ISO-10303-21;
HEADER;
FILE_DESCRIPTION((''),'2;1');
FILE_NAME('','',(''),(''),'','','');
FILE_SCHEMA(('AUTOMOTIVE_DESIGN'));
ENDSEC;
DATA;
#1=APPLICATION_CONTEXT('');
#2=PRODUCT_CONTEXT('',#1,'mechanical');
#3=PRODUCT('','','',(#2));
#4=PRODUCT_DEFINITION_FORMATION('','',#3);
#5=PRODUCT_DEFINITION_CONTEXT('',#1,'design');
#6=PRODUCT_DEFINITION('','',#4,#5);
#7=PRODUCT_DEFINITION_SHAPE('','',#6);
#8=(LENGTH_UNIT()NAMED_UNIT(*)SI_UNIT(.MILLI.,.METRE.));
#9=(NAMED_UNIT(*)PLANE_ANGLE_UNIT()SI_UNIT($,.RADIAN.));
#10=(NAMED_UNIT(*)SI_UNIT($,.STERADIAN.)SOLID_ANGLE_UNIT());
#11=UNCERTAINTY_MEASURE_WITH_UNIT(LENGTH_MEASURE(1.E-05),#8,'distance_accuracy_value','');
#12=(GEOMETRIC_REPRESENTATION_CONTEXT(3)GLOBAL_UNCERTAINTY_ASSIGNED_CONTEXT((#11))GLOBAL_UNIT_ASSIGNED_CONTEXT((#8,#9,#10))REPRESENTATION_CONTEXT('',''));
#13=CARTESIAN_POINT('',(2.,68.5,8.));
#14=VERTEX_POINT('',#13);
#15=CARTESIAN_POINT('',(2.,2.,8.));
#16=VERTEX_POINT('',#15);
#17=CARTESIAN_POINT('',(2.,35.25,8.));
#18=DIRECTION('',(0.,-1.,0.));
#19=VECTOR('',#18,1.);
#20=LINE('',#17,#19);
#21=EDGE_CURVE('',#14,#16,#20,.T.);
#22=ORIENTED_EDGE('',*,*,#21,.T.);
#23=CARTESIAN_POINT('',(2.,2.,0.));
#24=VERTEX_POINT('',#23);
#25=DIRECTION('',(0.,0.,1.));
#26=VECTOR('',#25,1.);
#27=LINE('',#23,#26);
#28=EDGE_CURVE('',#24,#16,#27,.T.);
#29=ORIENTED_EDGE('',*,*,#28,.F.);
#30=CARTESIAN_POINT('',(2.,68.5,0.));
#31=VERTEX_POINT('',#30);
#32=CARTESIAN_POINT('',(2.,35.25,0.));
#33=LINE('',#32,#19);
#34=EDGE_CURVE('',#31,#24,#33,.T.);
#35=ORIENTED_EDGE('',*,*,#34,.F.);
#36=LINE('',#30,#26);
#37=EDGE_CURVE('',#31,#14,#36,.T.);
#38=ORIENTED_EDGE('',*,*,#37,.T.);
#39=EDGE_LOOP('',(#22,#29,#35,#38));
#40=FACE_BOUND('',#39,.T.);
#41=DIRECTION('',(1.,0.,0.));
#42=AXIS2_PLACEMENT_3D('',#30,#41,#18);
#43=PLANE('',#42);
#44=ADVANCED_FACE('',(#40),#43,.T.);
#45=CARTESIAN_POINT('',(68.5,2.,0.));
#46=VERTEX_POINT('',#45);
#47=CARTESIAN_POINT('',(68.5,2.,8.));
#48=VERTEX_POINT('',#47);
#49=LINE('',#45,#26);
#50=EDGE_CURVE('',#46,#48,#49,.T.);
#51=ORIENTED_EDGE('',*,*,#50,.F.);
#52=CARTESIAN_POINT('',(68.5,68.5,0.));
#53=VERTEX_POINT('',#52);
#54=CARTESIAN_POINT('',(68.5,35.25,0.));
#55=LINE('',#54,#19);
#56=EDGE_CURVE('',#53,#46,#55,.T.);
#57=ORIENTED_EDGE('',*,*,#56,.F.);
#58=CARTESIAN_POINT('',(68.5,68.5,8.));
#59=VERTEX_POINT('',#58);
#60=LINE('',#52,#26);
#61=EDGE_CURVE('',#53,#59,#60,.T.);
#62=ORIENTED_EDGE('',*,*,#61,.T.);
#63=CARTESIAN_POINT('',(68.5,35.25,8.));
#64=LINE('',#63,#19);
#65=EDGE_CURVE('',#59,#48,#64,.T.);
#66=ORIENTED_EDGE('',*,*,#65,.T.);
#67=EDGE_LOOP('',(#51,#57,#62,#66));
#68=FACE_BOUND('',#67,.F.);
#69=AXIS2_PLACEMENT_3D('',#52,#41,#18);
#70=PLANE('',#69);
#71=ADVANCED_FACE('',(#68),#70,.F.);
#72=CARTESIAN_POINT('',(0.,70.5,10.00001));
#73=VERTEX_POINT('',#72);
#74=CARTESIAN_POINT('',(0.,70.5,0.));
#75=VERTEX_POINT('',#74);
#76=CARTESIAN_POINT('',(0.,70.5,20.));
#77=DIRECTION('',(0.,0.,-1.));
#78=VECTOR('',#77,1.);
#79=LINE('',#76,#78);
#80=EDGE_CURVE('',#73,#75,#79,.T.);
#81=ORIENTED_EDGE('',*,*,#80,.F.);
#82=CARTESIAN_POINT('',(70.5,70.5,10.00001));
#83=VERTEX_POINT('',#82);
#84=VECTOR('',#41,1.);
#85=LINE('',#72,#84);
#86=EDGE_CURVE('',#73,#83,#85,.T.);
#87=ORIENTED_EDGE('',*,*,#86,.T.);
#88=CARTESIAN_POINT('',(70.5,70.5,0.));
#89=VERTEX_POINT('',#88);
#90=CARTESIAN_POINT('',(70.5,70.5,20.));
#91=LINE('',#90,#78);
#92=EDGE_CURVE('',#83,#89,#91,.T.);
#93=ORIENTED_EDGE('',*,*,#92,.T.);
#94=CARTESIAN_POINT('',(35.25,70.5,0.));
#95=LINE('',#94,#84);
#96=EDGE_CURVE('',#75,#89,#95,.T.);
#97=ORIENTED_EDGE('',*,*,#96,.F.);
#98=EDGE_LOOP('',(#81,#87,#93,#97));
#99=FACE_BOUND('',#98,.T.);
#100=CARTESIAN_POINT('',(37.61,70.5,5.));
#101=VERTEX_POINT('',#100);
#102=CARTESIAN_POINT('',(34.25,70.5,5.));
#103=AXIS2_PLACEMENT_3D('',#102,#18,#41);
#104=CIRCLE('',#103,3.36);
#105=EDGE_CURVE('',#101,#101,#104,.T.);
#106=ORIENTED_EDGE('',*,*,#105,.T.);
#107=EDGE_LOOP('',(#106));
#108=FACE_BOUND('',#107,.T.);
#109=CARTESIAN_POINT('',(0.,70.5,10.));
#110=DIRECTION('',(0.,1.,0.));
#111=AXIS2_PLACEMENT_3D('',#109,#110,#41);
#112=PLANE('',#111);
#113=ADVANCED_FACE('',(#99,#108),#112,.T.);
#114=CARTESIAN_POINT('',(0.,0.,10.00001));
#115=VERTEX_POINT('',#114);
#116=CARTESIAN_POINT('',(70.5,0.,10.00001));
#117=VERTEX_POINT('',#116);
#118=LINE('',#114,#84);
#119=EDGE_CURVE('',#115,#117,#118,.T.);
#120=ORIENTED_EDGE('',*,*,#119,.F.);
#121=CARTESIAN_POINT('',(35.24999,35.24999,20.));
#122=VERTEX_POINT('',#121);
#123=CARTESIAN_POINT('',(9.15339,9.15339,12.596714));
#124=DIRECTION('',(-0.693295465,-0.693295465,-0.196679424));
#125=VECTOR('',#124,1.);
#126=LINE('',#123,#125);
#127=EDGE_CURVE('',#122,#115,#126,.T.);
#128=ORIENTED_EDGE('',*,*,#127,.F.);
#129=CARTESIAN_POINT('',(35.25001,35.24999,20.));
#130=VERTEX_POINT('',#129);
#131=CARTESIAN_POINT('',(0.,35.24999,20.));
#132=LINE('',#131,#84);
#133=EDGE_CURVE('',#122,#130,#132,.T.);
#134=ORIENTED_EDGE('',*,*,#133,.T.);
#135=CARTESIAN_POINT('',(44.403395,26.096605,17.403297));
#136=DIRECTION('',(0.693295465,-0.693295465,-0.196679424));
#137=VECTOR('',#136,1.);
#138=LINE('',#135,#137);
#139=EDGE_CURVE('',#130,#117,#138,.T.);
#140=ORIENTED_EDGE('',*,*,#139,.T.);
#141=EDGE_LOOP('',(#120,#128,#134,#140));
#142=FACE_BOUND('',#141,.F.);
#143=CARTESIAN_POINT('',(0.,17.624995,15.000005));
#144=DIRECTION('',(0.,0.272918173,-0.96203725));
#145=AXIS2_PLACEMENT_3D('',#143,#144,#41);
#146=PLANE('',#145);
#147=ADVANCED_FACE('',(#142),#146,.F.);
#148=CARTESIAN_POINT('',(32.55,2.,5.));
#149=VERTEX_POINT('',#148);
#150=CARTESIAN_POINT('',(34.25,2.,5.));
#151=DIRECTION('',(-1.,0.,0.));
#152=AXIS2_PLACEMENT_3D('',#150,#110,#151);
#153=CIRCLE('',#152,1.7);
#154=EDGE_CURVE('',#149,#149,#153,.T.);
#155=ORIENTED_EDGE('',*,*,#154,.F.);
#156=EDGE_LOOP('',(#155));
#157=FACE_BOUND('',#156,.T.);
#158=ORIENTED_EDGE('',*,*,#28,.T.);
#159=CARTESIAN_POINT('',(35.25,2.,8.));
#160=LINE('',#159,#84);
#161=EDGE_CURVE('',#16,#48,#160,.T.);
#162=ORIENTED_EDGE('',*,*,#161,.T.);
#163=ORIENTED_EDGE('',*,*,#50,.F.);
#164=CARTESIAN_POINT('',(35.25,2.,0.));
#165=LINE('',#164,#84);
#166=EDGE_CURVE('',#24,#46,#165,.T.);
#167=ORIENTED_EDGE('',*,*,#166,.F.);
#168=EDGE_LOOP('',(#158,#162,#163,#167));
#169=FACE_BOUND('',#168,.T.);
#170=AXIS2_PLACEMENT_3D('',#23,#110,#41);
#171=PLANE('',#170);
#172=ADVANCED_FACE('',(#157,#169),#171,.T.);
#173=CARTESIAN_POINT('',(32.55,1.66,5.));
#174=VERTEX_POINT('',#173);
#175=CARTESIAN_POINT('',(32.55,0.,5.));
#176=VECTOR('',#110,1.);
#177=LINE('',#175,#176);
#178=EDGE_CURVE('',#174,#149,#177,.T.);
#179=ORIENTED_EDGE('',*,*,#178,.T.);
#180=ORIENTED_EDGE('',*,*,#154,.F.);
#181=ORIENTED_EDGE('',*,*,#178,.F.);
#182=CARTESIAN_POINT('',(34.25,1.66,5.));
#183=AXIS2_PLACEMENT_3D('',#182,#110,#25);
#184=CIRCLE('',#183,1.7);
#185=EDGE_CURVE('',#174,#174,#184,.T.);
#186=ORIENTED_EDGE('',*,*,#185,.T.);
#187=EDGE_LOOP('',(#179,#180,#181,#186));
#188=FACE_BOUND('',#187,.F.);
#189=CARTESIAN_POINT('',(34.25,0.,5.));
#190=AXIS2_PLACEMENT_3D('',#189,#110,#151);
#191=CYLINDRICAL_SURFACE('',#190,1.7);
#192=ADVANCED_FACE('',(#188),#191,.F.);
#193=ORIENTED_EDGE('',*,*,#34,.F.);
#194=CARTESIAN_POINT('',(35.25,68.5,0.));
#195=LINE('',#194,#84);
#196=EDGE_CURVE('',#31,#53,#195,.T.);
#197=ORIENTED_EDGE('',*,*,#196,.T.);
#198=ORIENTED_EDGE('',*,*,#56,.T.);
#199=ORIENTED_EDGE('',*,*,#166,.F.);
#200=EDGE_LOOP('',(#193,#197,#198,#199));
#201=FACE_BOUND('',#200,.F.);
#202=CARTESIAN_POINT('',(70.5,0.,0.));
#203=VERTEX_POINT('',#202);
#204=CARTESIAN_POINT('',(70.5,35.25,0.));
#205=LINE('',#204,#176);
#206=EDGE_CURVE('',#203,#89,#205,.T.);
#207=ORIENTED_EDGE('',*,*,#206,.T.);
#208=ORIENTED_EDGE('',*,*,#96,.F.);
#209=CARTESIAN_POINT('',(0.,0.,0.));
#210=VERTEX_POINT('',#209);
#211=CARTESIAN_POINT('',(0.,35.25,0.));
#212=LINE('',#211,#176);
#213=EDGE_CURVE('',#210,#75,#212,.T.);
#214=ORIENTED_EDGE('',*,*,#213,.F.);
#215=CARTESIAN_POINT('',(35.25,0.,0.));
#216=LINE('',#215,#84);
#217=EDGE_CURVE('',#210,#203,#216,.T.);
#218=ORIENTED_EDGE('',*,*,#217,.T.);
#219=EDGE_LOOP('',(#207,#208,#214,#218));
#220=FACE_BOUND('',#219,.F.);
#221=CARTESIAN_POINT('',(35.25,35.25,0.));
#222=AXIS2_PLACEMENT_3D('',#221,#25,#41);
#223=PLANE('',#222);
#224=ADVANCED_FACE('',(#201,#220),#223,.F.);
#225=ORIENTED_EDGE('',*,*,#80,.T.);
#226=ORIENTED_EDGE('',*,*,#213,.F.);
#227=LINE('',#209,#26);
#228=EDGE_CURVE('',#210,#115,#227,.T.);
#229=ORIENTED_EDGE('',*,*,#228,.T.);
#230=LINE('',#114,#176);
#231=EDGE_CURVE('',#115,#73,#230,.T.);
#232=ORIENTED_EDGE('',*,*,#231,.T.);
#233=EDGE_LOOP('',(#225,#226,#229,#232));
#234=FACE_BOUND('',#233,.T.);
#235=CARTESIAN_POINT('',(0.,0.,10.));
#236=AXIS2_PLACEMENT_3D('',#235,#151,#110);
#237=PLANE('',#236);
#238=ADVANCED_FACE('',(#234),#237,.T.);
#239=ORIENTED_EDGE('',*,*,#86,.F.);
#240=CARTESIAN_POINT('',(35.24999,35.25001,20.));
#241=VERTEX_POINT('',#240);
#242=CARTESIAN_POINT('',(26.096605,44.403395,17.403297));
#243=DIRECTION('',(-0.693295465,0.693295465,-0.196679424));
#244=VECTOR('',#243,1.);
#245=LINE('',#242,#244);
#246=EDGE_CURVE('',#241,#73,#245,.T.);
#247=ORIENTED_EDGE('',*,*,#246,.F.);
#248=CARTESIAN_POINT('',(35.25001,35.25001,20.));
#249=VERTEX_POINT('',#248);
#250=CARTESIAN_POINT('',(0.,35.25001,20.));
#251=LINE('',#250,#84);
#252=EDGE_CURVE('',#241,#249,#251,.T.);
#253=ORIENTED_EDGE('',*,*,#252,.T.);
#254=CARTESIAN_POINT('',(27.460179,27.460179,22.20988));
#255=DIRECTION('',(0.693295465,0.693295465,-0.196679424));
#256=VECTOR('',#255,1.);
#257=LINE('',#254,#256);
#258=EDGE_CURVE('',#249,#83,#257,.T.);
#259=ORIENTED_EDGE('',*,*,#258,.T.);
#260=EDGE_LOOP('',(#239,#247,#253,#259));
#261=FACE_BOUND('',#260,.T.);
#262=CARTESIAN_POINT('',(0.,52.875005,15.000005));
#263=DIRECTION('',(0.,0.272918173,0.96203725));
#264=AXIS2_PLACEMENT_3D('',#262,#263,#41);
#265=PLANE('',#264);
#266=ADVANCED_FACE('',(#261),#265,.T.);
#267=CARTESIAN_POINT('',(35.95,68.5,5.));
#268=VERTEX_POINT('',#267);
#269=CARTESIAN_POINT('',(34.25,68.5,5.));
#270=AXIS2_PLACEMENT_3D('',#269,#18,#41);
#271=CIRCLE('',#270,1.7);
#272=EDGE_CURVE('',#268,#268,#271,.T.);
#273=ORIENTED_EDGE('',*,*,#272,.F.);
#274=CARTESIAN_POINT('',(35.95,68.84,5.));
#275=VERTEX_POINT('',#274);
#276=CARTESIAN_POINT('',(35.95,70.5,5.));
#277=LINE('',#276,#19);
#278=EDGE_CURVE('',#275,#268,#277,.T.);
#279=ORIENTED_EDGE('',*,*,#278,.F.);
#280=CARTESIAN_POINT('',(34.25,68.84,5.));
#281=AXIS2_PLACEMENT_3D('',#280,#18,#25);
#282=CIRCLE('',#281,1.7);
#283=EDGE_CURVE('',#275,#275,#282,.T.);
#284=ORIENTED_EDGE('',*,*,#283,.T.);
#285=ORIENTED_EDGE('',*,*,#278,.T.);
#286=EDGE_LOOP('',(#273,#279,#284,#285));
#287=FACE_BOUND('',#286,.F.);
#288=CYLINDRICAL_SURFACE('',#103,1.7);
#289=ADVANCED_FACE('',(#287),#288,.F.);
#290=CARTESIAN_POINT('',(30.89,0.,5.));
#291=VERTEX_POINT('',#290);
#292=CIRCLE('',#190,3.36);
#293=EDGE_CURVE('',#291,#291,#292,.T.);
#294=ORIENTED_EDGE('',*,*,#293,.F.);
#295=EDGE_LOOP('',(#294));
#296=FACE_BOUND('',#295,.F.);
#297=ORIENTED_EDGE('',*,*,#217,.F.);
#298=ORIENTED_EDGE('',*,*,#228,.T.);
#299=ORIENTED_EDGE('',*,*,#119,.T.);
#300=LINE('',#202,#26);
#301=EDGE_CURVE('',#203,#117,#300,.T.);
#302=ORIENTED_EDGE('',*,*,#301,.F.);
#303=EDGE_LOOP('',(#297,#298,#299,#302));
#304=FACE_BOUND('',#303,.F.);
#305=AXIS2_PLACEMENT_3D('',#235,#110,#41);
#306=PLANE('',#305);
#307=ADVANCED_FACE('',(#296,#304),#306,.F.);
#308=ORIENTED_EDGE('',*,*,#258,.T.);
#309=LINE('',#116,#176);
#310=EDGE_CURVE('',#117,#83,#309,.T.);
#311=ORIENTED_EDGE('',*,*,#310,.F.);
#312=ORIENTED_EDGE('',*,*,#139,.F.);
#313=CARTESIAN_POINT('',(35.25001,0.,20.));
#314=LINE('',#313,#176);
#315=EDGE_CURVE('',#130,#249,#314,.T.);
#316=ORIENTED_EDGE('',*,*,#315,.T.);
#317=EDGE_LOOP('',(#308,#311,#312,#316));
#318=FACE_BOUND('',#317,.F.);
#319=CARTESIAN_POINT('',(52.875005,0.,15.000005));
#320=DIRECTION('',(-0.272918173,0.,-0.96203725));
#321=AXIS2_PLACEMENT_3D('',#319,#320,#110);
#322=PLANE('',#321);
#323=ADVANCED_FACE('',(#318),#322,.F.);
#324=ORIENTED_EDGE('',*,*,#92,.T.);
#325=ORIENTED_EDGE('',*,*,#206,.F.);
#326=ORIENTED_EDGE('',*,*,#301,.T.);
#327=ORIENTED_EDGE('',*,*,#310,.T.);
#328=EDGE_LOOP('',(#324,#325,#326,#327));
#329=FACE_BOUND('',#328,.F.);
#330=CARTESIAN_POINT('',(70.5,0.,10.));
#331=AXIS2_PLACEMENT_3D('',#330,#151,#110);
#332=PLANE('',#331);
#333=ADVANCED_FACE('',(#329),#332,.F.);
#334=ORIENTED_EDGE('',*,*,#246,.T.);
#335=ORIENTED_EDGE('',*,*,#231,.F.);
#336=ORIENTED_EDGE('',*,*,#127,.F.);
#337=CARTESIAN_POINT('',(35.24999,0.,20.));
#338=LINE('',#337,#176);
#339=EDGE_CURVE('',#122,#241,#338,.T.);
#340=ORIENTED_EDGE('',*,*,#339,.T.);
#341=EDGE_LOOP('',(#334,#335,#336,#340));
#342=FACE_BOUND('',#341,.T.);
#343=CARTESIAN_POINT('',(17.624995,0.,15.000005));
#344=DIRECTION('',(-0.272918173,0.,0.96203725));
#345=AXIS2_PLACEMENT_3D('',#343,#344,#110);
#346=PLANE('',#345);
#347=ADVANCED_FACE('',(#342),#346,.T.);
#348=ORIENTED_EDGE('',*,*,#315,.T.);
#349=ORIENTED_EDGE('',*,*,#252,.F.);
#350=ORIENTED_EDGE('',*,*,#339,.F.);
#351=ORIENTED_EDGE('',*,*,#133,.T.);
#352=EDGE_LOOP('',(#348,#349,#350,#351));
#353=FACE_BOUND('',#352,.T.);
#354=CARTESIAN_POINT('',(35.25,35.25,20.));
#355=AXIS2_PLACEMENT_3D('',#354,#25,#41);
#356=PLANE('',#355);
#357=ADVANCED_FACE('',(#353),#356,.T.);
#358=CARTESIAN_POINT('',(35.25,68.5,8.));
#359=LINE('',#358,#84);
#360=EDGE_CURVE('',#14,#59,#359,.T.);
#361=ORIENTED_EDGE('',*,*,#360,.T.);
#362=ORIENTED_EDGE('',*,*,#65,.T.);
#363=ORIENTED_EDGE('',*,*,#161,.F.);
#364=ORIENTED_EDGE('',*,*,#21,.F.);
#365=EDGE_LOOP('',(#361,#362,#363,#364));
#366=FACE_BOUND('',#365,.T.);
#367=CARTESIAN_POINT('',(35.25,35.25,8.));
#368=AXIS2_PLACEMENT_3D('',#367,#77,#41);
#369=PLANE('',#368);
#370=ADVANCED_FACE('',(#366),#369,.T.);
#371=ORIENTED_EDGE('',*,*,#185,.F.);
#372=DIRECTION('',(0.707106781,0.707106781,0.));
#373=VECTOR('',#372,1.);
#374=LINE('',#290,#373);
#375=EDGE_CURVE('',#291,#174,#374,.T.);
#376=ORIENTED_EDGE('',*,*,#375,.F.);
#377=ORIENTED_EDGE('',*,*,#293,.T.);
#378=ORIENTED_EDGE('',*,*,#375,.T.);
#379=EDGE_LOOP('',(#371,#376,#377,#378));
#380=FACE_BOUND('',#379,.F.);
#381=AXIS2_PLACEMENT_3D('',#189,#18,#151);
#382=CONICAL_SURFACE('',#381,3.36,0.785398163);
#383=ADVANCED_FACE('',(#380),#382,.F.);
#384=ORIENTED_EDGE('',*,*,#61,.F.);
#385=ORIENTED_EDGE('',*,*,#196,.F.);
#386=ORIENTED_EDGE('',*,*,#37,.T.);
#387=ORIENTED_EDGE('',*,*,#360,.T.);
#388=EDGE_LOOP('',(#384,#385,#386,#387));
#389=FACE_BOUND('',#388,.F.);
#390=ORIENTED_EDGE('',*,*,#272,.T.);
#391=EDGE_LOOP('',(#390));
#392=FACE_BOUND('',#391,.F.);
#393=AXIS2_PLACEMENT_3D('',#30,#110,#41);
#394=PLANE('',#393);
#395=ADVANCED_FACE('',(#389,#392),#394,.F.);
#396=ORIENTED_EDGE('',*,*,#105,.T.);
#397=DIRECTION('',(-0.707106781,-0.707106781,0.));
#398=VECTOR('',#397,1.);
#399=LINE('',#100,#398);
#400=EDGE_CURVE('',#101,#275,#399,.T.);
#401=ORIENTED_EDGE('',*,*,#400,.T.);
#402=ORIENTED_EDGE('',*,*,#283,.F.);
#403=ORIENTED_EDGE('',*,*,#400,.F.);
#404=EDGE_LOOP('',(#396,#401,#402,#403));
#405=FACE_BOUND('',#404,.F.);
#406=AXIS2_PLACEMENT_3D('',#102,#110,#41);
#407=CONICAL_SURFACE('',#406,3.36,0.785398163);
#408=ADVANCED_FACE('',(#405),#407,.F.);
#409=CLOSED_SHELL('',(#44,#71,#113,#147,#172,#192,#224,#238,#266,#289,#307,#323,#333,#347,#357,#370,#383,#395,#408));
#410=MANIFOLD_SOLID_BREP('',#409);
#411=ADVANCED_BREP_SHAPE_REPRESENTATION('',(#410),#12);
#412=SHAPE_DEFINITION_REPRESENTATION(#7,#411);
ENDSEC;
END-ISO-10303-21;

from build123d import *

# Parameters (mm, degrees)
F0_W                 = 70.5
F0_H                 = 70.5
F1_DEPTH             = 10
F2_W                 = 70.5
F2_H                 = 70.5
F3_DEPTH             = 10
F4_SIZE2             = 9.99999
F4_SIZE              = 35.24999
F5_W                 = 66.5
F5_H                 = 66.5
F6_DEPTH             = 8
F9_D                 = 3.4
F9_DEPTH             = 12
F9_CSINK_D           = 6.72
F9_CSINK_ANGLE       = 90
F9_TIP               = 1.0214630523
F9_ON_F8_D           = 3.4
F9_ON_F8_DEPTH       = 12
F9_ON_F8_CSINK_D     = 6.72
F9_ON_F8_CSINK_ANGLE = 90
F9_ON_F8_TIP         = 1.0214630523


# Not quite as in the source:
# - a fillet or chamfer is up to 0.001 mm smaller than in the source, because OpenCascade refuses the exact size


with BuildPart() as f1:
    # F0 (on Top) → F1 (new body)
    with BuildSketch(Plane.XY):
        with Locations((35.25, 35.25)):
            Rectangle(F0_W, F0_H)
    extrude(amount=F1_DEPTH)

    # F2 (on face) → F3 (join)
    with BuildSketch(Plane.XY.offset(10)):
        with Locations((35.25, 35.25)):
            Rectangle(F2_W, F2_H)
    extrude(amount=F3_DEPTH)

    # F4 (size 35.25 and 10 in the source; OpenCascade refuses exactly that, so slightly less here)
    f4_edges = [f1.edges().sort_by_distance(p)[0] for p in [
        (35.25, 70.5, 20),
        (0, 35.25, 20),
        (35.25, 0, 20),
        (70.5, 35.25, 20),
    ]]
    f4_side = f1.faces().sort_by_distance((35.25, 35.25, 20))[0]
    chamfer(f4_edges, length=F4_SIZE, length2=F4_SIZE2, reference=f4_side)

    # F5 (on face) → F6 (cut)
    with BuildSketch(Plane(origin=(0, 0, 0), x_dir=(1, 0, 0), z_dir=(0, 0, -1))):
        with Locations((35.25, -35.25)):
            Rectangle(F5_W, F5_H)
    extrude(amount=-F6_DEPTH, mode=Mode.SUBTRACT)

    # F9
    with Locations(Plane.XZ):
        with Locations((34.25, 5)):
            CounterSinkHole(F9_D / 2, F9_CSINK_D / 2, depth=F9_DEPTH, counter_sink_angle=F9_CSINK_ANGLE)
            with Locations((0, 0, -(F9_DEPTH + F9_TIP / 2))):  # 118° drill point
                Cone(0, F9_D / 2, F9_TIP, mode=Mode.SUBTRACT)

    # F9 on F8
    with Locations(Plane(origin=(0, 70.5, 0), x_dir=(-1, 0, 0), z_dir=(0, 1, 0))):
        with Locations((-34.25, 5)):
            CounterSinkHole(F9_ON_F8_D / 2, F9_ON_F8_CSINK_D / 2, depth=F9_ON_F8_DEPTH, counter_sink_angle=F9_ON_F8_CSINK_ANGLE)
            with Locations((0, 0, -(F9_ON_F8_DEPTH + F9_ON_F8_TIP / 2))):  # 118° drill point
                Cone(0, F9_ON_F8_D / 2, F9_ON_F8_TIP, mode=Mode.SUBTRACT)


solid = f1.part
